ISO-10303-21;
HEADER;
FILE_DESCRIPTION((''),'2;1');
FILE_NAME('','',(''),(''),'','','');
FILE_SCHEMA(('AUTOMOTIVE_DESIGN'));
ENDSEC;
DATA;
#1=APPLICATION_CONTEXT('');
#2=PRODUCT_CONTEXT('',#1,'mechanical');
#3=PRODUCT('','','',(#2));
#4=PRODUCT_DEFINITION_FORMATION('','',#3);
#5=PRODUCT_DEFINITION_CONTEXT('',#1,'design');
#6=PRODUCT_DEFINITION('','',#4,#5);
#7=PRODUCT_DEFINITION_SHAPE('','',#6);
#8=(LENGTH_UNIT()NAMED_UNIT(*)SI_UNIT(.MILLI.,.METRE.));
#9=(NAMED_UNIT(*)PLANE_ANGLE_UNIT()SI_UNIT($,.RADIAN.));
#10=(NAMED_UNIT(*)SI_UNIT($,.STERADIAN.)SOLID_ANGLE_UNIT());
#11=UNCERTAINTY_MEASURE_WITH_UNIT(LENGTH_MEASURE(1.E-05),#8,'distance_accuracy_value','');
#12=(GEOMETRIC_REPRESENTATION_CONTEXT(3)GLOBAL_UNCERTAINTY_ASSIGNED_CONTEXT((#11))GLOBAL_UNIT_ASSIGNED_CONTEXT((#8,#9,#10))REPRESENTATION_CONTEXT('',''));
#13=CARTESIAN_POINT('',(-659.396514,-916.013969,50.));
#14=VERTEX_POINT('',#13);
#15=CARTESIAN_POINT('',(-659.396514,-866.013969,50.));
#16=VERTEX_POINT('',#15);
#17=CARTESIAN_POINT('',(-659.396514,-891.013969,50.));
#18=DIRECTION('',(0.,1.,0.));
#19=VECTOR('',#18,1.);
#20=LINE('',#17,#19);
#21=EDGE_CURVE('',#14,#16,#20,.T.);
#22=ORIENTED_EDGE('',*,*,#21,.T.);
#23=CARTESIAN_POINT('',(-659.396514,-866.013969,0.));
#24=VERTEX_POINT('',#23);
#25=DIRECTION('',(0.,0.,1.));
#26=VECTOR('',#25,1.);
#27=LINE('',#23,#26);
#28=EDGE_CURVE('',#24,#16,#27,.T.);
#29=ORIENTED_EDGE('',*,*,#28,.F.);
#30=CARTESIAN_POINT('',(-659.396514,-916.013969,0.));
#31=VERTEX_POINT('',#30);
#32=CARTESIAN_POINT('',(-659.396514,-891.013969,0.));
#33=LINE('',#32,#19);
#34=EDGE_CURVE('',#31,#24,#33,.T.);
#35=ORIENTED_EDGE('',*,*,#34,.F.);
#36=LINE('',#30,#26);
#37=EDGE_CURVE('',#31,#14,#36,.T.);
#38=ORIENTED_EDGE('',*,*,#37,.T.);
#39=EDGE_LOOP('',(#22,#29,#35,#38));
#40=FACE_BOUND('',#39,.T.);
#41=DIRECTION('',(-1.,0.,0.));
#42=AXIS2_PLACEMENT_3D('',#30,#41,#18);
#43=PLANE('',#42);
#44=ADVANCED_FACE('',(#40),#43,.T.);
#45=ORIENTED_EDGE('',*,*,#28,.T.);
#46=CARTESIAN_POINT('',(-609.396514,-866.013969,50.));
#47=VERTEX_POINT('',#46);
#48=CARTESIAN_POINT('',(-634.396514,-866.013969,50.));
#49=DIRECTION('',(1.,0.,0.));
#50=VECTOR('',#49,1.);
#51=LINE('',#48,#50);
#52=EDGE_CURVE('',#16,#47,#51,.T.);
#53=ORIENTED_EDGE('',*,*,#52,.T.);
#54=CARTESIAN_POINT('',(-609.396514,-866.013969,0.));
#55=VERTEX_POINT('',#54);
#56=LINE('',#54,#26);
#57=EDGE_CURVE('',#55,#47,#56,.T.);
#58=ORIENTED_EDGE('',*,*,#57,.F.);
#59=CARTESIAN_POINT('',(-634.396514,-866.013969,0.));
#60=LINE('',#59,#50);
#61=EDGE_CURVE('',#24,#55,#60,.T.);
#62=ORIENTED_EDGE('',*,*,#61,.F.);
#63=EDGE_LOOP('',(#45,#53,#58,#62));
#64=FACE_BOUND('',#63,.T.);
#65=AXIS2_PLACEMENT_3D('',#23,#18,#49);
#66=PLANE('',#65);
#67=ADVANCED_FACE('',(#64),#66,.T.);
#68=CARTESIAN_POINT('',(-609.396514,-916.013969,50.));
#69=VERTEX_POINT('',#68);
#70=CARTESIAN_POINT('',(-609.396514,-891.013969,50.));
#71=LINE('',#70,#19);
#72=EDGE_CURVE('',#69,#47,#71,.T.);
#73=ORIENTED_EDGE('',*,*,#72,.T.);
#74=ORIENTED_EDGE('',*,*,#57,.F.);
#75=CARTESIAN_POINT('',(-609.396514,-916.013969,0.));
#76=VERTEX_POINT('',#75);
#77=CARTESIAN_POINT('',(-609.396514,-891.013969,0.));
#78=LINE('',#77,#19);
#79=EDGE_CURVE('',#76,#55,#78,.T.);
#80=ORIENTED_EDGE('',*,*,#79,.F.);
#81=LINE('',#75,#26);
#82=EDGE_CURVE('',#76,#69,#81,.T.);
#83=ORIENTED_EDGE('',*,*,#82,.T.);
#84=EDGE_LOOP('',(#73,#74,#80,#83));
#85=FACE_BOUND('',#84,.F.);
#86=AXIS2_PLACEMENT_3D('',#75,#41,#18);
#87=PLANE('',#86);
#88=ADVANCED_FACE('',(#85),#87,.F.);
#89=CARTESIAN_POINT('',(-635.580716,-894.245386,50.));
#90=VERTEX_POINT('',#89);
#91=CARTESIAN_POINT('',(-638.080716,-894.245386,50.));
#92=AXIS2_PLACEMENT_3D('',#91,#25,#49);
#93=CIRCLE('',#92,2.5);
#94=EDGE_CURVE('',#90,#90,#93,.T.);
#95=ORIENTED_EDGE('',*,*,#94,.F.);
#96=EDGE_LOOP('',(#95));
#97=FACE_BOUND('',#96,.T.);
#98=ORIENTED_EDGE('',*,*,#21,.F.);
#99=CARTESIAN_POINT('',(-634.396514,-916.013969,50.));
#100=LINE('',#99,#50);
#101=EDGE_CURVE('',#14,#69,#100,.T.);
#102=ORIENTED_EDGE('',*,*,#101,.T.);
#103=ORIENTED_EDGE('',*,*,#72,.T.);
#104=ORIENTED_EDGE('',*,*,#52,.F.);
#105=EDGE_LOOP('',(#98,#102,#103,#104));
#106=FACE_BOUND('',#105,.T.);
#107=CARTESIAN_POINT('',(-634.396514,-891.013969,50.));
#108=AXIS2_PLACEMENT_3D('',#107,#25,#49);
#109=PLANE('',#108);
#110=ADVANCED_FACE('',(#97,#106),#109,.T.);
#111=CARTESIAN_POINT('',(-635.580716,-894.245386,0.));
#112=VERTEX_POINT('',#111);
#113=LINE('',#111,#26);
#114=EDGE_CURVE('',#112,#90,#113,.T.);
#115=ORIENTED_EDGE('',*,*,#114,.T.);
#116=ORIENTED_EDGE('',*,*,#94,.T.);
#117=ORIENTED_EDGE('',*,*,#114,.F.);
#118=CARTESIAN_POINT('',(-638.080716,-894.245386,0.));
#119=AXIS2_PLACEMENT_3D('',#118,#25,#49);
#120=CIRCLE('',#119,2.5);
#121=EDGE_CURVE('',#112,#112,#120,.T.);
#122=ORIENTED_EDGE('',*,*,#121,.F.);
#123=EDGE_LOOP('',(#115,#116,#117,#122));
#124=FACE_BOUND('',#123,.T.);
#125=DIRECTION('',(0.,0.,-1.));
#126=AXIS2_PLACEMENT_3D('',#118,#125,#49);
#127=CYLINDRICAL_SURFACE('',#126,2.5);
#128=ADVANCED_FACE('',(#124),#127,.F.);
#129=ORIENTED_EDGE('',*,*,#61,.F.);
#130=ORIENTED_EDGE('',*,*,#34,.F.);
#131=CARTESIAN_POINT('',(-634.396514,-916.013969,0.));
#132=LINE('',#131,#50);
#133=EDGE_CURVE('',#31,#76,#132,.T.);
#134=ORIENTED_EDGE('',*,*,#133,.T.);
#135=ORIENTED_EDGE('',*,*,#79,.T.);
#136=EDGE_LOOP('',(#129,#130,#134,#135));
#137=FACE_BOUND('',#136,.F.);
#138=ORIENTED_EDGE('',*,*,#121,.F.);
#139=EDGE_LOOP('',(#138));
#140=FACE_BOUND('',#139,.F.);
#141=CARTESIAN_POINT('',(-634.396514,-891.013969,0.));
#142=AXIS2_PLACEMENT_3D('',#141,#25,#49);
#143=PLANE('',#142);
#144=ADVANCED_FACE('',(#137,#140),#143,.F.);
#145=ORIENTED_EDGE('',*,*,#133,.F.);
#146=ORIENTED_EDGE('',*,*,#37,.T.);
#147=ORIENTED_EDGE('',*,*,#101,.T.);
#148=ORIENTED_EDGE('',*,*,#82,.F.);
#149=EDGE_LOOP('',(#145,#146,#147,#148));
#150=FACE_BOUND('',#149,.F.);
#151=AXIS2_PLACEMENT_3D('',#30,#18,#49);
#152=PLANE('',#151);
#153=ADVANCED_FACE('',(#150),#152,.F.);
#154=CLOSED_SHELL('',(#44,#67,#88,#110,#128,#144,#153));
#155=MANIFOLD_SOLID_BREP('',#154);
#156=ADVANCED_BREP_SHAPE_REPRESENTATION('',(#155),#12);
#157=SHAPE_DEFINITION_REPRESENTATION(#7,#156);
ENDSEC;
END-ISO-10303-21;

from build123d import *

# Parameters (mm, degrees)
F0_W     = 50
F0_H     = 50
F0_R     = 2.5
F1_DEPTH = 50


# Not quite as in the source:
# - a feature of the source that left no trace in its solid (it failed there, or was rolled back) is left out


with BuildPart() as f1:
    # F0 (on Top) → F1 (new body)
    with BuildSketch(Plane.XY):
        with Locations((-634.3965135887, -891.0139694249)):
            Rectangle(F0_W, F0_H)
        with Locations((-638.0807161331, -894.2453861237)):
            Circle(F0_R, mode=Mode.SUBTRACT)
    extrude(amount=F1_DEPTH)


solid = f1.part
